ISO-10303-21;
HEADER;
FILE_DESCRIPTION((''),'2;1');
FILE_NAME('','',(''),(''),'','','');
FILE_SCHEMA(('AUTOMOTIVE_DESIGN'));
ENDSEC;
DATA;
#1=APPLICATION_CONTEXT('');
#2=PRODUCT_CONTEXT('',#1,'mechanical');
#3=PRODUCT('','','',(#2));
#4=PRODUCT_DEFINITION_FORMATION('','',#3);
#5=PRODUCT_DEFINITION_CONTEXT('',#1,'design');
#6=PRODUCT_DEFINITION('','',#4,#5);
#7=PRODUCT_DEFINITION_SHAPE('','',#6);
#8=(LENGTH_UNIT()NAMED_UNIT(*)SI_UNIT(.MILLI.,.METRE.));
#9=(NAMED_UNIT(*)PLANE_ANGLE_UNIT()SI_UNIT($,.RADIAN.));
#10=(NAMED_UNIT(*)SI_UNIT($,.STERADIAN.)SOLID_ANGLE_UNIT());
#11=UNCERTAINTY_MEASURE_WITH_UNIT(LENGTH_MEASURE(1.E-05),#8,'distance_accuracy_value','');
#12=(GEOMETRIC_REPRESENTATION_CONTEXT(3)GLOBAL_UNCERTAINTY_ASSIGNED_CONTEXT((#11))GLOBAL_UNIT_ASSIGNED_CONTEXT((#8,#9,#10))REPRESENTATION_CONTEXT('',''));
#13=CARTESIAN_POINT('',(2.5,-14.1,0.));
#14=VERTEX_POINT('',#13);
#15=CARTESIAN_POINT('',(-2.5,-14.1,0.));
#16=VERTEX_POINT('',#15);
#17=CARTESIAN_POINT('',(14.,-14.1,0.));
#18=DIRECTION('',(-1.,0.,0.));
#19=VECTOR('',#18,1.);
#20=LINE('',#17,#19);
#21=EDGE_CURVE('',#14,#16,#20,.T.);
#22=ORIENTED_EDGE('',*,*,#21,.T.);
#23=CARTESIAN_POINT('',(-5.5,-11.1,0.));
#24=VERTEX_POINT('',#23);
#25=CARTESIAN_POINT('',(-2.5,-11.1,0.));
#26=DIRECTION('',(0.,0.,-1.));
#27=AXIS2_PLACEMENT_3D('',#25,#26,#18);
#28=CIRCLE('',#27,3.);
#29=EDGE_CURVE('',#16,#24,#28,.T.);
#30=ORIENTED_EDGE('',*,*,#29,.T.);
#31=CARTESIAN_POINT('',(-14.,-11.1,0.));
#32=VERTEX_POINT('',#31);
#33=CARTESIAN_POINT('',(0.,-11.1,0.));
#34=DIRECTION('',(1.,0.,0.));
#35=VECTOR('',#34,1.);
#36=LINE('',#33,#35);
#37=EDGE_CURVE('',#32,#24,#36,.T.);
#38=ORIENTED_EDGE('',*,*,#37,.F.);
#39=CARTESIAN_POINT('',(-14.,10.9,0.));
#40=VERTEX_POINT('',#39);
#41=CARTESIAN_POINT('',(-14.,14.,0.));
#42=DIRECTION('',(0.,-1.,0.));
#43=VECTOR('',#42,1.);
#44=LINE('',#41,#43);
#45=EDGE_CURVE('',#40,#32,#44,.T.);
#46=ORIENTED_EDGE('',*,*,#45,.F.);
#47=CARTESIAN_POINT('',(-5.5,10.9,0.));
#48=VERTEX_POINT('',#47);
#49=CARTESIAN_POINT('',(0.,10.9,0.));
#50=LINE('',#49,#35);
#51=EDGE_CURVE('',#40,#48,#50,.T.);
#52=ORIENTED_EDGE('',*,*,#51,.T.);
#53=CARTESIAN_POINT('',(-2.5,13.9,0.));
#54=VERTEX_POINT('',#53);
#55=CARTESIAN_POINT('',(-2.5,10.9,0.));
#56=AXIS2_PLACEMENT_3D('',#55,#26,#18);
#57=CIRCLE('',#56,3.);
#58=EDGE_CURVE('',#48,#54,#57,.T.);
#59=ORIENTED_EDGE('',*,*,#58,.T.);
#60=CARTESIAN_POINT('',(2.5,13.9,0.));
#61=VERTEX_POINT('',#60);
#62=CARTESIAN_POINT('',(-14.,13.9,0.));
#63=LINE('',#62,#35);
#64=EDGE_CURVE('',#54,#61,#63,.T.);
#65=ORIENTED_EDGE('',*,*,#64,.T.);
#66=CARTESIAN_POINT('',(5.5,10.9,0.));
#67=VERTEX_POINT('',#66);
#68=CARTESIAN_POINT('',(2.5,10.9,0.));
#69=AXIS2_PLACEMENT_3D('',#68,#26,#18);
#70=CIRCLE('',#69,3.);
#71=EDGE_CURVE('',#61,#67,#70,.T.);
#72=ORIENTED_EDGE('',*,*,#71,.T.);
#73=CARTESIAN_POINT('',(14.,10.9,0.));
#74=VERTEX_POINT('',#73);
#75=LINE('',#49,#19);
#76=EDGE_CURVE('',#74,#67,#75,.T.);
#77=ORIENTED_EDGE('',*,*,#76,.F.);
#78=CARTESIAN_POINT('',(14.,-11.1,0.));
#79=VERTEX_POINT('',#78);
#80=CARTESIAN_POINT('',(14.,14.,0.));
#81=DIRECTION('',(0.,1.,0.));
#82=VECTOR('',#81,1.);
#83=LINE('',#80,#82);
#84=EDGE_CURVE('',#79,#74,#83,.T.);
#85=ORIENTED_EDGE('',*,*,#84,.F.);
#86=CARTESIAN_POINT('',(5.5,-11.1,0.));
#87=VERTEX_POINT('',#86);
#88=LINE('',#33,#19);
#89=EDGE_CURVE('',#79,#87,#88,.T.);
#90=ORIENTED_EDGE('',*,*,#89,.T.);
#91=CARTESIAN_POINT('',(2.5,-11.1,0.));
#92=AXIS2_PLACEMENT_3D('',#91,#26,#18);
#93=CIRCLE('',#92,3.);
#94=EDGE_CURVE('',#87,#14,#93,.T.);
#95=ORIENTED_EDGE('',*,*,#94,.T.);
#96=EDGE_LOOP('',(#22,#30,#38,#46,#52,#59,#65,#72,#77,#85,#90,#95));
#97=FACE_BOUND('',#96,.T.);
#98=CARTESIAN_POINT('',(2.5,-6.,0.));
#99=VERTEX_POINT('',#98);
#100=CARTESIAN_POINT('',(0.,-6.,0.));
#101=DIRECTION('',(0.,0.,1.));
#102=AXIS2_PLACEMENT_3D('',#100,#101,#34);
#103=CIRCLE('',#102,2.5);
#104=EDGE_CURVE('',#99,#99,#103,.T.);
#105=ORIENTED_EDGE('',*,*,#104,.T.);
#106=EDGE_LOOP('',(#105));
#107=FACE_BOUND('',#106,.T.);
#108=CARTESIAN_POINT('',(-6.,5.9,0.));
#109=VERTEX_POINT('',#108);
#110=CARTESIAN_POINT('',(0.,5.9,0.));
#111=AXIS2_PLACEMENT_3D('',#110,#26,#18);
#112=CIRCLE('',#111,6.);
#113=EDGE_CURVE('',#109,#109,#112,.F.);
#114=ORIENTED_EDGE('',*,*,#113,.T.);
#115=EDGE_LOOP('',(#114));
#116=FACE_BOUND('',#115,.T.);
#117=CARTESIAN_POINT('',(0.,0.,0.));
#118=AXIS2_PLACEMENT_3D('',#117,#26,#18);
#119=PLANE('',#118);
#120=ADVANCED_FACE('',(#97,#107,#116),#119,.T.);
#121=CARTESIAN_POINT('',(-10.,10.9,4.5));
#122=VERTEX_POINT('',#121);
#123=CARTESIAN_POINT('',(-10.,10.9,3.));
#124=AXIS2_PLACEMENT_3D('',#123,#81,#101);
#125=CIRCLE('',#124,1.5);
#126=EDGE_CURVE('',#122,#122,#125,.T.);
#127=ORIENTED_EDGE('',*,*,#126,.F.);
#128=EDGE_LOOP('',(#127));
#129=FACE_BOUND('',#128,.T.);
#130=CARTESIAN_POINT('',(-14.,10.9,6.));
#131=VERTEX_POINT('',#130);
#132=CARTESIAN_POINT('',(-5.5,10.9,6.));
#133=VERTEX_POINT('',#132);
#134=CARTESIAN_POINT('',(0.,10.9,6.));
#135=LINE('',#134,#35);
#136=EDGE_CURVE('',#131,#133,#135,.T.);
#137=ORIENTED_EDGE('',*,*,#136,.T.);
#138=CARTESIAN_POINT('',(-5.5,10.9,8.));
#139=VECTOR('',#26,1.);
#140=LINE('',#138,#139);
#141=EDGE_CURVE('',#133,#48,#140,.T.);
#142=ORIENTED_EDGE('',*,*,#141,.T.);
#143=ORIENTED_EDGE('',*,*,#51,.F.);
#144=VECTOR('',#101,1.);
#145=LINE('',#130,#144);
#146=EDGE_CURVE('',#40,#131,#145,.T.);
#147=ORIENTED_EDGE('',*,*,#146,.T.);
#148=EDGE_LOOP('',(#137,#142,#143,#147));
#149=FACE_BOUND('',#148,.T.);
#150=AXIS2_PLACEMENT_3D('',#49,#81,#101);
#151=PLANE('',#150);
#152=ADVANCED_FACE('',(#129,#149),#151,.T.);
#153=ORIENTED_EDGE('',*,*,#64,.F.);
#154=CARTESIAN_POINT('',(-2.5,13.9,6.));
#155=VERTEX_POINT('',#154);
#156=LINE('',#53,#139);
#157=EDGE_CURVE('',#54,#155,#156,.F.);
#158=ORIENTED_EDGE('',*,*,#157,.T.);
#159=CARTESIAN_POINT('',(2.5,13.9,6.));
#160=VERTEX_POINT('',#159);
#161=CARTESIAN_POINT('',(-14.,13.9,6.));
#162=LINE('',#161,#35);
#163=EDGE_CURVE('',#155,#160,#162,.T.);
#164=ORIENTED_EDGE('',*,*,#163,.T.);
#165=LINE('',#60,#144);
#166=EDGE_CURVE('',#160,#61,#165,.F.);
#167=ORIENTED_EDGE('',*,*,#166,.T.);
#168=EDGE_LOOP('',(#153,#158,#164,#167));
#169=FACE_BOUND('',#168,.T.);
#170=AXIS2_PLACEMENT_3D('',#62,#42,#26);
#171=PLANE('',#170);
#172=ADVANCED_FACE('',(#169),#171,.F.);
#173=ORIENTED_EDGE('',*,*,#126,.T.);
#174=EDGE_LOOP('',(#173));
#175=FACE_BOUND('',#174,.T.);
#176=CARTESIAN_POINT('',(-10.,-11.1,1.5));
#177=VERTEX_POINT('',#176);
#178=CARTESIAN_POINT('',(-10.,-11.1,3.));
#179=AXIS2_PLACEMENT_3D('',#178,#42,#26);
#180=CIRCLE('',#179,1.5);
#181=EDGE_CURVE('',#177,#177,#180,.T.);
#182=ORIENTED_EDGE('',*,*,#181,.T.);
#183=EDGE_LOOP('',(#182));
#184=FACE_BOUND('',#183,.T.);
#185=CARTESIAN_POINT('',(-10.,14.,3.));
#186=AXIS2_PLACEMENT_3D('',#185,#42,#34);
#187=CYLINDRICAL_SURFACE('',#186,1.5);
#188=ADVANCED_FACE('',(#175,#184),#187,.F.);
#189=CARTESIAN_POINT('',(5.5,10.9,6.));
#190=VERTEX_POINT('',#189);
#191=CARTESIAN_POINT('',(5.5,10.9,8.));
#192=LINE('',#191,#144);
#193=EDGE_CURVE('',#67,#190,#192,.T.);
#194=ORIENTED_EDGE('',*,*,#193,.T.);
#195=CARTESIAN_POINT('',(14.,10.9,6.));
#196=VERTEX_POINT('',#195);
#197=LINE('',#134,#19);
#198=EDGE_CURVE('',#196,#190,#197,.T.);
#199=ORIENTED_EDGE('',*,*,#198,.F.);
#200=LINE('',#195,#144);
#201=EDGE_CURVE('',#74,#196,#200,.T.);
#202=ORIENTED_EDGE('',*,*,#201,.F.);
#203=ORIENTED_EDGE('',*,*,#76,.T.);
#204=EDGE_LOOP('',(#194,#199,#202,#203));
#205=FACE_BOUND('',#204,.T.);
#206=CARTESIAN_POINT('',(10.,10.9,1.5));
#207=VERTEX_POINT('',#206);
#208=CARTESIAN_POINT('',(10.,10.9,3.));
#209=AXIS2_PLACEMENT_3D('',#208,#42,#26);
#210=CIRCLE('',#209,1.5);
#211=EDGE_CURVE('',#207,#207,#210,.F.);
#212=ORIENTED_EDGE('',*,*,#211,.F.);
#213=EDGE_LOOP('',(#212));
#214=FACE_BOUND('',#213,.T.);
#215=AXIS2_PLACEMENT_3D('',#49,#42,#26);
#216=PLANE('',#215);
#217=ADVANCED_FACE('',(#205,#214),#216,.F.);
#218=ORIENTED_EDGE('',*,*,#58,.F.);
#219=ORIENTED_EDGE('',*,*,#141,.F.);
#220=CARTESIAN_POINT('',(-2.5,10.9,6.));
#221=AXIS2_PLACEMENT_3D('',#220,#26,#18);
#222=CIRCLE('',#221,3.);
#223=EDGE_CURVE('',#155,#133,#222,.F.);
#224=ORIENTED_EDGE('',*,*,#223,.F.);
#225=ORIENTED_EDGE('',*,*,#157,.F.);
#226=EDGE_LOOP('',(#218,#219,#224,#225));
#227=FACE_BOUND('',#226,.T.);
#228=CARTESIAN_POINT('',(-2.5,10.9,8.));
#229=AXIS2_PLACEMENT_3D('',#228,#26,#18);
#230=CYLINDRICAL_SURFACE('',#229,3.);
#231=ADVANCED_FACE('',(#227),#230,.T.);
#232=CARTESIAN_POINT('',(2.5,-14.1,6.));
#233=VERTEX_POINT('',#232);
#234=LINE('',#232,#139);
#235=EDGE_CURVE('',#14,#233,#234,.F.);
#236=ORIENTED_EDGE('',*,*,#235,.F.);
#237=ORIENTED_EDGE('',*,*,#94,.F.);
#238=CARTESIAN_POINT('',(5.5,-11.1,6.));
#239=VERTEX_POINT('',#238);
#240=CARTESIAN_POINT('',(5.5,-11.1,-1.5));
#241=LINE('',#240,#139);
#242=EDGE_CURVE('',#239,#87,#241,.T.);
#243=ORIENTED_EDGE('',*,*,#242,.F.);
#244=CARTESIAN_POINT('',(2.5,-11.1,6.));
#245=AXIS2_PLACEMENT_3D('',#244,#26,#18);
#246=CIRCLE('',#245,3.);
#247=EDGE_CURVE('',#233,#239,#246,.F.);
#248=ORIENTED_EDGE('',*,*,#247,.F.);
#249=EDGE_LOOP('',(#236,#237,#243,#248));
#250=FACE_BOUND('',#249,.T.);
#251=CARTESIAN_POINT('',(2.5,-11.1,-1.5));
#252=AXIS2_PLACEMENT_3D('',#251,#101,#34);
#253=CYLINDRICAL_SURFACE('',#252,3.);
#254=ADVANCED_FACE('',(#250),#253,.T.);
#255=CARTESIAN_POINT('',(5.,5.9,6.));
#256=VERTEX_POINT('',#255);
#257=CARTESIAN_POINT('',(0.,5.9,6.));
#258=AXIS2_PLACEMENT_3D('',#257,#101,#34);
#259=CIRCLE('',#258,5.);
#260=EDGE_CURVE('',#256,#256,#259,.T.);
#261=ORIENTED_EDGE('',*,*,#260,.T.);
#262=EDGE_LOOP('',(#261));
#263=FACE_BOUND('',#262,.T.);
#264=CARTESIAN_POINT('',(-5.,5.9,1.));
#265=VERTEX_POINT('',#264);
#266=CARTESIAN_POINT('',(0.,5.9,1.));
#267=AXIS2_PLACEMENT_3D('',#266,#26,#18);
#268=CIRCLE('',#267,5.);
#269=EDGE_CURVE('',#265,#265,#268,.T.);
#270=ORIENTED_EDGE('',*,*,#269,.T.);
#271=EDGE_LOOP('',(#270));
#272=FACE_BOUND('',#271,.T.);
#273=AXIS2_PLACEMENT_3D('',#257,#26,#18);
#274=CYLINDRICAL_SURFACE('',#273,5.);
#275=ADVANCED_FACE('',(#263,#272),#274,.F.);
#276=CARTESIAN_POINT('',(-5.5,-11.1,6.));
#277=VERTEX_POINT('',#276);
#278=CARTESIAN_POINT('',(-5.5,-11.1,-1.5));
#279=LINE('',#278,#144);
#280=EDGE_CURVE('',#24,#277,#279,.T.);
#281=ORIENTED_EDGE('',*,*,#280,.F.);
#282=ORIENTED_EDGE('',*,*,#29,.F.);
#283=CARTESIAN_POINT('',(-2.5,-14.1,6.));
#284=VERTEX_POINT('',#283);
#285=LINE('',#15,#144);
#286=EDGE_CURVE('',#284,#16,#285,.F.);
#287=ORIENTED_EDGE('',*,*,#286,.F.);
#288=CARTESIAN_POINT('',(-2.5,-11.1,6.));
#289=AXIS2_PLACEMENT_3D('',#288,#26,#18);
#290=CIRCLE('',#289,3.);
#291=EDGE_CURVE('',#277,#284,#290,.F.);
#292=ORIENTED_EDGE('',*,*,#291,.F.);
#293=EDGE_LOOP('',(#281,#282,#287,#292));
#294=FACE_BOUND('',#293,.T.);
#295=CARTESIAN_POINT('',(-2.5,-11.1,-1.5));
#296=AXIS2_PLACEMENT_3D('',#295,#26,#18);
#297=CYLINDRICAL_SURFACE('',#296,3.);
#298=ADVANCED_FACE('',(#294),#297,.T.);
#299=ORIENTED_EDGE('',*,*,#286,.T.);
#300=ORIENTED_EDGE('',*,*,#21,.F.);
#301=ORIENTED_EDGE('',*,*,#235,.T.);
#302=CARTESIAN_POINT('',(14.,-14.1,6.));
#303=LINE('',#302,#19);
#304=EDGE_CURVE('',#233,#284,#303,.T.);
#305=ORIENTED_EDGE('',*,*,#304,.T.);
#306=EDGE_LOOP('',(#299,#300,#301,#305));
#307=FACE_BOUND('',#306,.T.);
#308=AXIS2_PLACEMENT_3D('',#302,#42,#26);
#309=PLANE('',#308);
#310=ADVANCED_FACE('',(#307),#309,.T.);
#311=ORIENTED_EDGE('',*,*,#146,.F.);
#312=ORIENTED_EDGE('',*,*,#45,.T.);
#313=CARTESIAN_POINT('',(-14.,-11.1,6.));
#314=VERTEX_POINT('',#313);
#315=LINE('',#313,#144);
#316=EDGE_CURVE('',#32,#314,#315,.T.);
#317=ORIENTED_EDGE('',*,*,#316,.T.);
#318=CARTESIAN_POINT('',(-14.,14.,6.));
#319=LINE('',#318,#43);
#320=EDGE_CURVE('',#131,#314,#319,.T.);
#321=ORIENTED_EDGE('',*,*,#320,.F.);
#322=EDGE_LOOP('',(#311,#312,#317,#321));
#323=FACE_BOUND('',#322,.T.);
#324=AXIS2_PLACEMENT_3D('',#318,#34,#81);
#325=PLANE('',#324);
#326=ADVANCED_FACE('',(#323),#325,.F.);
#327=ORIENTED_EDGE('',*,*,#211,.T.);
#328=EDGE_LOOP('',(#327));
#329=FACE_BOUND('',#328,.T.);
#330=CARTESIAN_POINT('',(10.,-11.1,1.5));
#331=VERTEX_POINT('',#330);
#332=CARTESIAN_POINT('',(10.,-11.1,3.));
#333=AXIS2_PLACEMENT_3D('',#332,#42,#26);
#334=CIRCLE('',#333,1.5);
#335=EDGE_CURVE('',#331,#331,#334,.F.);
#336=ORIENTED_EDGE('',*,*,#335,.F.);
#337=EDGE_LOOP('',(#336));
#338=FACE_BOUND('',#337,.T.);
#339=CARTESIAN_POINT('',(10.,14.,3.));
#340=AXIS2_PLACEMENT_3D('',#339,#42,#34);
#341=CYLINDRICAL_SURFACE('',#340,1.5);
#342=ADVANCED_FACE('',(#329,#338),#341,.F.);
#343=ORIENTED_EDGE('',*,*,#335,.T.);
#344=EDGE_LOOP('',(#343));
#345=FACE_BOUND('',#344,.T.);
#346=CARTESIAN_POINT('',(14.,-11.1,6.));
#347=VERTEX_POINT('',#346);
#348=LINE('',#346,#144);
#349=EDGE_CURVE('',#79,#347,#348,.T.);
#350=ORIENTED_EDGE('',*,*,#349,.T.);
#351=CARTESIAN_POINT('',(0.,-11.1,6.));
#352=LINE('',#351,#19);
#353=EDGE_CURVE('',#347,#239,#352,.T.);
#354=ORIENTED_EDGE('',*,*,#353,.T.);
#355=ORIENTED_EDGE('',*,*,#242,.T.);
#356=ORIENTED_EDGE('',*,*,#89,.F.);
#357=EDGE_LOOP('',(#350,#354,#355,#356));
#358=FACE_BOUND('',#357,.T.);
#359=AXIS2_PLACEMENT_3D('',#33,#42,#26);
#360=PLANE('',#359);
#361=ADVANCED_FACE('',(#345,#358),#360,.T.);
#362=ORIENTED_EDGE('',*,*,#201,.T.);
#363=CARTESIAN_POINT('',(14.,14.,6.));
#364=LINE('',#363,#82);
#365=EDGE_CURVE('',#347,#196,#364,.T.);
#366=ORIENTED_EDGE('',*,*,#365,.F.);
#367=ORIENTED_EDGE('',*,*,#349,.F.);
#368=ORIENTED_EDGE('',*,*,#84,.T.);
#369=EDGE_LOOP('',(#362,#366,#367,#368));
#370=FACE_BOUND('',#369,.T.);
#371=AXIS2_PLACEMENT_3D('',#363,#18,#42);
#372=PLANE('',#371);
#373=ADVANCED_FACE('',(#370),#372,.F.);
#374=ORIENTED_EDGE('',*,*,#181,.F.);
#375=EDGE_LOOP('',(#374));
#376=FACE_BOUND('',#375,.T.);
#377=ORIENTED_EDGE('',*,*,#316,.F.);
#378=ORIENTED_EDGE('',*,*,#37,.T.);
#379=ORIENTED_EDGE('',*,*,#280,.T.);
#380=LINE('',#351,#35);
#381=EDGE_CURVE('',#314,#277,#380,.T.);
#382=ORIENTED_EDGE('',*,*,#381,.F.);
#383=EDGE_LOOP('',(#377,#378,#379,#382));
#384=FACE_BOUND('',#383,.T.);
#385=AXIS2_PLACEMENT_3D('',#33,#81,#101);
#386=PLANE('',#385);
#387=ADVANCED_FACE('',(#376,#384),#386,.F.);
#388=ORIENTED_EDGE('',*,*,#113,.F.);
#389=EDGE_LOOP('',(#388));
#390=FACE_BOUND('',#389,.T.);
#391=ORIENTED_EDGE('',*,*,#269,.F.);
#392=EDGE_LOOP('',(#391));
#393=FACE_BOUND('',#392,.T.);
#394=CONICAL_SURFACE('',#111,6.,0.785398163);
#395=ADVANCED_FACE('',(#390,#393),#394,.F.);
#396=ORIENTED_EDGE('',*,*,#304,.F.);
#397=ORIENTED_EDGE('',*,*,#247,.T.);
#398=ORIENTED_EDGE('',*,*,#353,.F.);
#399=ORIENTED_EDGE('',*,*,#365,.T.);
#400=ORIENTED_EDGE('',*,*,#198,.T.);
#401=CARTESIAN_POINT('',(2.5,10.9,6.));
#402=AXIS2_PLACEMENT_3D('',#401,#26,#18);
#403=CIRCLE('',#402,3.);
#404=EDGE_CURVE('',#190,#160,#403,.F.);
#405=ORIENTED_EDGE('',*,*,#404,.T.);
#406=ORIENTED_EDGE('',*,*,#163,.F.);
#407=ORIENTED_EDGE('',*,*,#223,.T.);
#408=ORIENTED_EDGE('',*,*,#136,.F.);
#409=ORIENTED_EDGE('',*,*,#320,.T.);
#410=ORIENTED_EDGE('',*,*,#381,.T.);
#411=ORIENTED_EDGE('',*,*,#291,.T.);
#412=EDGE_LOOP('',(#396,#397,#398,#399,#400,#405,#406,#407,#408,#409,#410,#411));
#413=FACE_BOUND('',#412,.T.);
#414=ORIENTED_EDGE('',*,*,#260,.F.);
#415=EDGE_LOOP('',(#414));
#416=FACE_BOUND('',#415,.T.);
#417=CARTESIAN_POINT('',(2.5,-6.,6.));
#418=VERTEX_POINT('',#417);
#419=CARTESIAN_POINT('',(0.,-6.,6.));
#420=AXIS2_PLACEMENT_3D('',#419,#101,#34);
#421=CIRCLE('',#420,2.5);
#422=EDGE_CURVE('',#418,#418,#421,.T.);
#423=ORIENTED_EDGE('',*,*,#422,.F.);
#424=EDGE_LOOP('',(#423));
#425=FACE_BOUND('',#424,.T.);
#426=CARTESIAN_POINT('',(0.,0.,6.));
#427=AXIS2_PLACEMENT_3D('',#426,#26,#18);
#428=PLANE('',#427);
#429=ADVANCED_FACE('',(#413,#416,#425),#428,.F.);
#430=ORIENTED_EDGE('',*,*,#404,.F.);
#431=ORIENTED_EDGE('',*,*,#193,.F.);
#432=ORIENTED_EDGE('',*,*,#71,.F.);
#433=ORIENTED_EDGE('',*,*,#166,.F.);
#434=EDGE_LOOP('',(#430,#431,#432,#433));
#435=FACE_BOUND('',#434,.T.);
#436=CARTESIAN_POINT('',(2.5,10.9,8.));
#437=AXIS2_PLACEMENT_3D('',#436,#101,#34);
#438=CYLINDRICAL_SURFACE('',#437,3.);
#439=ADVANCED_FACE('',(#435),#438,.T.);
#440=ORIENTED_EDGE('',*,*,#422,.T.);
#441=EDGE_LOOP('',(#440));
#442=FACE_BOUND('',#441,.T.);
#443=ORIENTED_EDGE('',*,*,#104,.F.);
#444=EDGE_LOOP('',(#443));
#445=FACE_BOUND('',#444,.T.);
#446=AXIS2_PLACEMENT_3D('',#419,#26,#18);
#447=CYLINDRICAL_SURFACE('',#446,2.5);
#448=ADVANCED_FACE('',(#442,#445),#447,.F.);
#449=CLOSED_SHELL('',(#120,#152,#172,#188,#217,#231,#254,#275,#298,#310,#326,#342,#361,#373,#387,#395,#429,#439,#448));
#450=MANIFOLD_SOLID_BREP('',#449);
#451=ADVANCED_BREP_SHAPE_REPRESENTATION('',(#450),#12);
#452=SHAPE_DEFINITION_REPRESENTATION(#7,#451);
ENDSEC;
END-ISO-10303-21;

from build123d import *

# Parameters (mm, degrees)
SKETCH_1_W          = 28
SKETCH_1_H          = 28
SKETCH_1_R          = 2.5
SKETCH_1_R_2        = 5
EXTRUDE_1_DEPTH     = 6
SKETCH_2_R          = 1.5
CUT_EXTRUDE_1_DEPTH = 32.874754901
CHAMFER_2_SIZE      = 1
SKETCH_8_W          = 28
SKETCH_8_H          = 0.1
EXTRUDE_4_DEPTH     = 6
SKETCH_9_W          = 28
SKETCH_9_H          = 0.1
CUT_EXTRUDE_4_DEPTH = 21.755962999
SKETCH_10_R         = 1.5
CUT_EXTRUDE_5_DEPTH = 32.874754901
CUT_EXTRUDE_START   = -3
SKETCH_11_W         = 9
SKETCH_11_H         = 10
SKETCH_11_R         = 1.5
CUT_EXTRUDE_6_DEPTH = 3
SKETCH_12_W         = 9
SKETCH_12_H         = 9
SKETCH_12_R         = 1.5
CUT_EXTRUDE_7_DEPTH = 3
FILLET_1_R          = 3


with BuildPart() as part:
    # 草图1 → 凸台-拉伸1 (new body)
    with BuildSketch(Plane.XY):
        Rectangle(SKETCH_1_W, SKETCH_1_H)
        with Locations((0, -6)):
            Circle(SKETCH_1_R, mode=Mode.SUBTRACT)
        with Locations((0, 5.9)):
            Circle(SKETCH_1_R_2, mode=Mode.SUBTRACT)
    extrude(amount=EXTRUDE_1_DEPTH)

    # 草图2 → 切除-拉伸1 (cut, through all)
    with BuildSketch(Plane(origin=(0, -14, 0), x_dir=(-1, 0, 0), z_dir=(0, -1, 0))):
        with Locations(Location((10, -3, 0), (0, 0, 180))):
            Circle(SKETCH_2_R)
        with Locations(Location((-10, -3, 0), (0, 0, 180))):
            Circle(SKETCH_2_R)
    extrude(amount=-CUT_EXTRUDE_1_DEPTH, mode=Mode.SUBTRACT)

    # 倒角2
    chamfer_2_edges = [part.edges().sort_by_distance(p)[0] for p in [
        (-5, 5.9, 0),
    ]]
    chamfer(chamfer_2_edges, length=CHAMFER_2_SIZE)

    # 草图8 → 凸台-拉伸4 (add)
    with BuildSketch(Plane(origin=(0, 0, 0), x_dir=(-1, 0, 0), z_dir=(0, 0, -1))):
        with Locations((0, -14.05)):
            Rectangle(SKETCH_8_W, SKETCH_8_H)
    extrude(amount=-EXTRUDE_4_DEPTH)

    # 草图9 → 切除-拉伸4 (cut, through all)
    with BuildSketch(Plane.XY.offset(6)):
        with Locations((0, 13.95)):
            Rectangle(SKETCH_9_W, SKETCH_9_H)
    extrude(amount=-CUT_EXTRUDE_4_DEPTH, mode=Mode.SUBTRACT)

    # 草图10 → 切除-拉伸5 (cut, through all)
    with BuildSketch(Plane(origin=(0, 13.9, 0), x_dir=(1, 0, 0), z_dir=(0, 1, 0))):
        with Locations(Location((-10, -3, 0), (0, 0, 90))):
            Circle(SKETCH_10_R)
        with Locations(Location((10, -3, 0), (0, 0, 90))):
            Circle(SKETCH_10_R)
    extrude(amount=-CUT_EXTRUDE_5_DEPTH, mode=Mode.SUBTRACT)

    # 草图11 → 切除-拉伸6 (cut)
    # profile 1 of 2: a face of its own
    with BuildSketch(Plane(origin=(0, 13.9, 0), x_dir=(1, 0, 0), z_dir=(0, 1, 0)).offset(CUT_EXTRUDE_START)):
        with Locations((-10, -3)):
            Rectangle(SKETCH_11_W, SKETCH_11_H)
        with Locations(Location((-10, -3, 0), (0, 0, 270))):
            Circle(SKETCH_11_R, mode=Mode.SUBTRACT)
    # profile 2 of 2: a face of its own
    with BuildSketch(Plane(origin=(0, 13.9, 0), x_dir=(1, 0, 0), z_dir=(0, 1, 0)).offset(CUT_EXTRUDE_START)):
        with Locations((10, -3)):
            Rectangle(SKETCH_11_W, SKETCH_11_H)
    extrude(amount=CUT_EXTRUDE_6_DEPTH, mode=Mode.SUBTRACT)

    # 草图12 → 切除-拉伸7 (cut)
    # profile 1 of 2: a face of its own
    with BuildSketch(Plane.XZ.offset(14.1)):
        with Locations((-10, 3)):
            Rectangle(SKETCH_12_W, SKETCH_12_H)
        with Locations(Location((-10, 3, 0), (0, 0, 270))):
            Circle(SKETCH_12_R, mode=Mode.SUBTRACT)
    # profile 2 of 2: a face of its own
    with BuildSketch(Plane.XZ.offset(14.1)):
        with Locations((10, 3)):
            Rectangle(SKETCH_12_W, SKETCH_12_H)
    extrude(amount=-CUT_EXTRUDE_7_DEPTH, mode=Mode.SUBTRACT)

    # 圆角1
    fillet_1_edges = [part.edges().sort_by_distance(p)[0] for p in [
        (5.5, -14.1, 3),
        (-5.5, -14.1, 3),
        (5.5, 13.9, 3),
        (-5.5, 13.9, 3),
    ]]
    fillet(fillet_1_edges, radius=FILLET_1_R - 0.0001)  # a hair under: the kernel refuses the full size


solid = part.part
